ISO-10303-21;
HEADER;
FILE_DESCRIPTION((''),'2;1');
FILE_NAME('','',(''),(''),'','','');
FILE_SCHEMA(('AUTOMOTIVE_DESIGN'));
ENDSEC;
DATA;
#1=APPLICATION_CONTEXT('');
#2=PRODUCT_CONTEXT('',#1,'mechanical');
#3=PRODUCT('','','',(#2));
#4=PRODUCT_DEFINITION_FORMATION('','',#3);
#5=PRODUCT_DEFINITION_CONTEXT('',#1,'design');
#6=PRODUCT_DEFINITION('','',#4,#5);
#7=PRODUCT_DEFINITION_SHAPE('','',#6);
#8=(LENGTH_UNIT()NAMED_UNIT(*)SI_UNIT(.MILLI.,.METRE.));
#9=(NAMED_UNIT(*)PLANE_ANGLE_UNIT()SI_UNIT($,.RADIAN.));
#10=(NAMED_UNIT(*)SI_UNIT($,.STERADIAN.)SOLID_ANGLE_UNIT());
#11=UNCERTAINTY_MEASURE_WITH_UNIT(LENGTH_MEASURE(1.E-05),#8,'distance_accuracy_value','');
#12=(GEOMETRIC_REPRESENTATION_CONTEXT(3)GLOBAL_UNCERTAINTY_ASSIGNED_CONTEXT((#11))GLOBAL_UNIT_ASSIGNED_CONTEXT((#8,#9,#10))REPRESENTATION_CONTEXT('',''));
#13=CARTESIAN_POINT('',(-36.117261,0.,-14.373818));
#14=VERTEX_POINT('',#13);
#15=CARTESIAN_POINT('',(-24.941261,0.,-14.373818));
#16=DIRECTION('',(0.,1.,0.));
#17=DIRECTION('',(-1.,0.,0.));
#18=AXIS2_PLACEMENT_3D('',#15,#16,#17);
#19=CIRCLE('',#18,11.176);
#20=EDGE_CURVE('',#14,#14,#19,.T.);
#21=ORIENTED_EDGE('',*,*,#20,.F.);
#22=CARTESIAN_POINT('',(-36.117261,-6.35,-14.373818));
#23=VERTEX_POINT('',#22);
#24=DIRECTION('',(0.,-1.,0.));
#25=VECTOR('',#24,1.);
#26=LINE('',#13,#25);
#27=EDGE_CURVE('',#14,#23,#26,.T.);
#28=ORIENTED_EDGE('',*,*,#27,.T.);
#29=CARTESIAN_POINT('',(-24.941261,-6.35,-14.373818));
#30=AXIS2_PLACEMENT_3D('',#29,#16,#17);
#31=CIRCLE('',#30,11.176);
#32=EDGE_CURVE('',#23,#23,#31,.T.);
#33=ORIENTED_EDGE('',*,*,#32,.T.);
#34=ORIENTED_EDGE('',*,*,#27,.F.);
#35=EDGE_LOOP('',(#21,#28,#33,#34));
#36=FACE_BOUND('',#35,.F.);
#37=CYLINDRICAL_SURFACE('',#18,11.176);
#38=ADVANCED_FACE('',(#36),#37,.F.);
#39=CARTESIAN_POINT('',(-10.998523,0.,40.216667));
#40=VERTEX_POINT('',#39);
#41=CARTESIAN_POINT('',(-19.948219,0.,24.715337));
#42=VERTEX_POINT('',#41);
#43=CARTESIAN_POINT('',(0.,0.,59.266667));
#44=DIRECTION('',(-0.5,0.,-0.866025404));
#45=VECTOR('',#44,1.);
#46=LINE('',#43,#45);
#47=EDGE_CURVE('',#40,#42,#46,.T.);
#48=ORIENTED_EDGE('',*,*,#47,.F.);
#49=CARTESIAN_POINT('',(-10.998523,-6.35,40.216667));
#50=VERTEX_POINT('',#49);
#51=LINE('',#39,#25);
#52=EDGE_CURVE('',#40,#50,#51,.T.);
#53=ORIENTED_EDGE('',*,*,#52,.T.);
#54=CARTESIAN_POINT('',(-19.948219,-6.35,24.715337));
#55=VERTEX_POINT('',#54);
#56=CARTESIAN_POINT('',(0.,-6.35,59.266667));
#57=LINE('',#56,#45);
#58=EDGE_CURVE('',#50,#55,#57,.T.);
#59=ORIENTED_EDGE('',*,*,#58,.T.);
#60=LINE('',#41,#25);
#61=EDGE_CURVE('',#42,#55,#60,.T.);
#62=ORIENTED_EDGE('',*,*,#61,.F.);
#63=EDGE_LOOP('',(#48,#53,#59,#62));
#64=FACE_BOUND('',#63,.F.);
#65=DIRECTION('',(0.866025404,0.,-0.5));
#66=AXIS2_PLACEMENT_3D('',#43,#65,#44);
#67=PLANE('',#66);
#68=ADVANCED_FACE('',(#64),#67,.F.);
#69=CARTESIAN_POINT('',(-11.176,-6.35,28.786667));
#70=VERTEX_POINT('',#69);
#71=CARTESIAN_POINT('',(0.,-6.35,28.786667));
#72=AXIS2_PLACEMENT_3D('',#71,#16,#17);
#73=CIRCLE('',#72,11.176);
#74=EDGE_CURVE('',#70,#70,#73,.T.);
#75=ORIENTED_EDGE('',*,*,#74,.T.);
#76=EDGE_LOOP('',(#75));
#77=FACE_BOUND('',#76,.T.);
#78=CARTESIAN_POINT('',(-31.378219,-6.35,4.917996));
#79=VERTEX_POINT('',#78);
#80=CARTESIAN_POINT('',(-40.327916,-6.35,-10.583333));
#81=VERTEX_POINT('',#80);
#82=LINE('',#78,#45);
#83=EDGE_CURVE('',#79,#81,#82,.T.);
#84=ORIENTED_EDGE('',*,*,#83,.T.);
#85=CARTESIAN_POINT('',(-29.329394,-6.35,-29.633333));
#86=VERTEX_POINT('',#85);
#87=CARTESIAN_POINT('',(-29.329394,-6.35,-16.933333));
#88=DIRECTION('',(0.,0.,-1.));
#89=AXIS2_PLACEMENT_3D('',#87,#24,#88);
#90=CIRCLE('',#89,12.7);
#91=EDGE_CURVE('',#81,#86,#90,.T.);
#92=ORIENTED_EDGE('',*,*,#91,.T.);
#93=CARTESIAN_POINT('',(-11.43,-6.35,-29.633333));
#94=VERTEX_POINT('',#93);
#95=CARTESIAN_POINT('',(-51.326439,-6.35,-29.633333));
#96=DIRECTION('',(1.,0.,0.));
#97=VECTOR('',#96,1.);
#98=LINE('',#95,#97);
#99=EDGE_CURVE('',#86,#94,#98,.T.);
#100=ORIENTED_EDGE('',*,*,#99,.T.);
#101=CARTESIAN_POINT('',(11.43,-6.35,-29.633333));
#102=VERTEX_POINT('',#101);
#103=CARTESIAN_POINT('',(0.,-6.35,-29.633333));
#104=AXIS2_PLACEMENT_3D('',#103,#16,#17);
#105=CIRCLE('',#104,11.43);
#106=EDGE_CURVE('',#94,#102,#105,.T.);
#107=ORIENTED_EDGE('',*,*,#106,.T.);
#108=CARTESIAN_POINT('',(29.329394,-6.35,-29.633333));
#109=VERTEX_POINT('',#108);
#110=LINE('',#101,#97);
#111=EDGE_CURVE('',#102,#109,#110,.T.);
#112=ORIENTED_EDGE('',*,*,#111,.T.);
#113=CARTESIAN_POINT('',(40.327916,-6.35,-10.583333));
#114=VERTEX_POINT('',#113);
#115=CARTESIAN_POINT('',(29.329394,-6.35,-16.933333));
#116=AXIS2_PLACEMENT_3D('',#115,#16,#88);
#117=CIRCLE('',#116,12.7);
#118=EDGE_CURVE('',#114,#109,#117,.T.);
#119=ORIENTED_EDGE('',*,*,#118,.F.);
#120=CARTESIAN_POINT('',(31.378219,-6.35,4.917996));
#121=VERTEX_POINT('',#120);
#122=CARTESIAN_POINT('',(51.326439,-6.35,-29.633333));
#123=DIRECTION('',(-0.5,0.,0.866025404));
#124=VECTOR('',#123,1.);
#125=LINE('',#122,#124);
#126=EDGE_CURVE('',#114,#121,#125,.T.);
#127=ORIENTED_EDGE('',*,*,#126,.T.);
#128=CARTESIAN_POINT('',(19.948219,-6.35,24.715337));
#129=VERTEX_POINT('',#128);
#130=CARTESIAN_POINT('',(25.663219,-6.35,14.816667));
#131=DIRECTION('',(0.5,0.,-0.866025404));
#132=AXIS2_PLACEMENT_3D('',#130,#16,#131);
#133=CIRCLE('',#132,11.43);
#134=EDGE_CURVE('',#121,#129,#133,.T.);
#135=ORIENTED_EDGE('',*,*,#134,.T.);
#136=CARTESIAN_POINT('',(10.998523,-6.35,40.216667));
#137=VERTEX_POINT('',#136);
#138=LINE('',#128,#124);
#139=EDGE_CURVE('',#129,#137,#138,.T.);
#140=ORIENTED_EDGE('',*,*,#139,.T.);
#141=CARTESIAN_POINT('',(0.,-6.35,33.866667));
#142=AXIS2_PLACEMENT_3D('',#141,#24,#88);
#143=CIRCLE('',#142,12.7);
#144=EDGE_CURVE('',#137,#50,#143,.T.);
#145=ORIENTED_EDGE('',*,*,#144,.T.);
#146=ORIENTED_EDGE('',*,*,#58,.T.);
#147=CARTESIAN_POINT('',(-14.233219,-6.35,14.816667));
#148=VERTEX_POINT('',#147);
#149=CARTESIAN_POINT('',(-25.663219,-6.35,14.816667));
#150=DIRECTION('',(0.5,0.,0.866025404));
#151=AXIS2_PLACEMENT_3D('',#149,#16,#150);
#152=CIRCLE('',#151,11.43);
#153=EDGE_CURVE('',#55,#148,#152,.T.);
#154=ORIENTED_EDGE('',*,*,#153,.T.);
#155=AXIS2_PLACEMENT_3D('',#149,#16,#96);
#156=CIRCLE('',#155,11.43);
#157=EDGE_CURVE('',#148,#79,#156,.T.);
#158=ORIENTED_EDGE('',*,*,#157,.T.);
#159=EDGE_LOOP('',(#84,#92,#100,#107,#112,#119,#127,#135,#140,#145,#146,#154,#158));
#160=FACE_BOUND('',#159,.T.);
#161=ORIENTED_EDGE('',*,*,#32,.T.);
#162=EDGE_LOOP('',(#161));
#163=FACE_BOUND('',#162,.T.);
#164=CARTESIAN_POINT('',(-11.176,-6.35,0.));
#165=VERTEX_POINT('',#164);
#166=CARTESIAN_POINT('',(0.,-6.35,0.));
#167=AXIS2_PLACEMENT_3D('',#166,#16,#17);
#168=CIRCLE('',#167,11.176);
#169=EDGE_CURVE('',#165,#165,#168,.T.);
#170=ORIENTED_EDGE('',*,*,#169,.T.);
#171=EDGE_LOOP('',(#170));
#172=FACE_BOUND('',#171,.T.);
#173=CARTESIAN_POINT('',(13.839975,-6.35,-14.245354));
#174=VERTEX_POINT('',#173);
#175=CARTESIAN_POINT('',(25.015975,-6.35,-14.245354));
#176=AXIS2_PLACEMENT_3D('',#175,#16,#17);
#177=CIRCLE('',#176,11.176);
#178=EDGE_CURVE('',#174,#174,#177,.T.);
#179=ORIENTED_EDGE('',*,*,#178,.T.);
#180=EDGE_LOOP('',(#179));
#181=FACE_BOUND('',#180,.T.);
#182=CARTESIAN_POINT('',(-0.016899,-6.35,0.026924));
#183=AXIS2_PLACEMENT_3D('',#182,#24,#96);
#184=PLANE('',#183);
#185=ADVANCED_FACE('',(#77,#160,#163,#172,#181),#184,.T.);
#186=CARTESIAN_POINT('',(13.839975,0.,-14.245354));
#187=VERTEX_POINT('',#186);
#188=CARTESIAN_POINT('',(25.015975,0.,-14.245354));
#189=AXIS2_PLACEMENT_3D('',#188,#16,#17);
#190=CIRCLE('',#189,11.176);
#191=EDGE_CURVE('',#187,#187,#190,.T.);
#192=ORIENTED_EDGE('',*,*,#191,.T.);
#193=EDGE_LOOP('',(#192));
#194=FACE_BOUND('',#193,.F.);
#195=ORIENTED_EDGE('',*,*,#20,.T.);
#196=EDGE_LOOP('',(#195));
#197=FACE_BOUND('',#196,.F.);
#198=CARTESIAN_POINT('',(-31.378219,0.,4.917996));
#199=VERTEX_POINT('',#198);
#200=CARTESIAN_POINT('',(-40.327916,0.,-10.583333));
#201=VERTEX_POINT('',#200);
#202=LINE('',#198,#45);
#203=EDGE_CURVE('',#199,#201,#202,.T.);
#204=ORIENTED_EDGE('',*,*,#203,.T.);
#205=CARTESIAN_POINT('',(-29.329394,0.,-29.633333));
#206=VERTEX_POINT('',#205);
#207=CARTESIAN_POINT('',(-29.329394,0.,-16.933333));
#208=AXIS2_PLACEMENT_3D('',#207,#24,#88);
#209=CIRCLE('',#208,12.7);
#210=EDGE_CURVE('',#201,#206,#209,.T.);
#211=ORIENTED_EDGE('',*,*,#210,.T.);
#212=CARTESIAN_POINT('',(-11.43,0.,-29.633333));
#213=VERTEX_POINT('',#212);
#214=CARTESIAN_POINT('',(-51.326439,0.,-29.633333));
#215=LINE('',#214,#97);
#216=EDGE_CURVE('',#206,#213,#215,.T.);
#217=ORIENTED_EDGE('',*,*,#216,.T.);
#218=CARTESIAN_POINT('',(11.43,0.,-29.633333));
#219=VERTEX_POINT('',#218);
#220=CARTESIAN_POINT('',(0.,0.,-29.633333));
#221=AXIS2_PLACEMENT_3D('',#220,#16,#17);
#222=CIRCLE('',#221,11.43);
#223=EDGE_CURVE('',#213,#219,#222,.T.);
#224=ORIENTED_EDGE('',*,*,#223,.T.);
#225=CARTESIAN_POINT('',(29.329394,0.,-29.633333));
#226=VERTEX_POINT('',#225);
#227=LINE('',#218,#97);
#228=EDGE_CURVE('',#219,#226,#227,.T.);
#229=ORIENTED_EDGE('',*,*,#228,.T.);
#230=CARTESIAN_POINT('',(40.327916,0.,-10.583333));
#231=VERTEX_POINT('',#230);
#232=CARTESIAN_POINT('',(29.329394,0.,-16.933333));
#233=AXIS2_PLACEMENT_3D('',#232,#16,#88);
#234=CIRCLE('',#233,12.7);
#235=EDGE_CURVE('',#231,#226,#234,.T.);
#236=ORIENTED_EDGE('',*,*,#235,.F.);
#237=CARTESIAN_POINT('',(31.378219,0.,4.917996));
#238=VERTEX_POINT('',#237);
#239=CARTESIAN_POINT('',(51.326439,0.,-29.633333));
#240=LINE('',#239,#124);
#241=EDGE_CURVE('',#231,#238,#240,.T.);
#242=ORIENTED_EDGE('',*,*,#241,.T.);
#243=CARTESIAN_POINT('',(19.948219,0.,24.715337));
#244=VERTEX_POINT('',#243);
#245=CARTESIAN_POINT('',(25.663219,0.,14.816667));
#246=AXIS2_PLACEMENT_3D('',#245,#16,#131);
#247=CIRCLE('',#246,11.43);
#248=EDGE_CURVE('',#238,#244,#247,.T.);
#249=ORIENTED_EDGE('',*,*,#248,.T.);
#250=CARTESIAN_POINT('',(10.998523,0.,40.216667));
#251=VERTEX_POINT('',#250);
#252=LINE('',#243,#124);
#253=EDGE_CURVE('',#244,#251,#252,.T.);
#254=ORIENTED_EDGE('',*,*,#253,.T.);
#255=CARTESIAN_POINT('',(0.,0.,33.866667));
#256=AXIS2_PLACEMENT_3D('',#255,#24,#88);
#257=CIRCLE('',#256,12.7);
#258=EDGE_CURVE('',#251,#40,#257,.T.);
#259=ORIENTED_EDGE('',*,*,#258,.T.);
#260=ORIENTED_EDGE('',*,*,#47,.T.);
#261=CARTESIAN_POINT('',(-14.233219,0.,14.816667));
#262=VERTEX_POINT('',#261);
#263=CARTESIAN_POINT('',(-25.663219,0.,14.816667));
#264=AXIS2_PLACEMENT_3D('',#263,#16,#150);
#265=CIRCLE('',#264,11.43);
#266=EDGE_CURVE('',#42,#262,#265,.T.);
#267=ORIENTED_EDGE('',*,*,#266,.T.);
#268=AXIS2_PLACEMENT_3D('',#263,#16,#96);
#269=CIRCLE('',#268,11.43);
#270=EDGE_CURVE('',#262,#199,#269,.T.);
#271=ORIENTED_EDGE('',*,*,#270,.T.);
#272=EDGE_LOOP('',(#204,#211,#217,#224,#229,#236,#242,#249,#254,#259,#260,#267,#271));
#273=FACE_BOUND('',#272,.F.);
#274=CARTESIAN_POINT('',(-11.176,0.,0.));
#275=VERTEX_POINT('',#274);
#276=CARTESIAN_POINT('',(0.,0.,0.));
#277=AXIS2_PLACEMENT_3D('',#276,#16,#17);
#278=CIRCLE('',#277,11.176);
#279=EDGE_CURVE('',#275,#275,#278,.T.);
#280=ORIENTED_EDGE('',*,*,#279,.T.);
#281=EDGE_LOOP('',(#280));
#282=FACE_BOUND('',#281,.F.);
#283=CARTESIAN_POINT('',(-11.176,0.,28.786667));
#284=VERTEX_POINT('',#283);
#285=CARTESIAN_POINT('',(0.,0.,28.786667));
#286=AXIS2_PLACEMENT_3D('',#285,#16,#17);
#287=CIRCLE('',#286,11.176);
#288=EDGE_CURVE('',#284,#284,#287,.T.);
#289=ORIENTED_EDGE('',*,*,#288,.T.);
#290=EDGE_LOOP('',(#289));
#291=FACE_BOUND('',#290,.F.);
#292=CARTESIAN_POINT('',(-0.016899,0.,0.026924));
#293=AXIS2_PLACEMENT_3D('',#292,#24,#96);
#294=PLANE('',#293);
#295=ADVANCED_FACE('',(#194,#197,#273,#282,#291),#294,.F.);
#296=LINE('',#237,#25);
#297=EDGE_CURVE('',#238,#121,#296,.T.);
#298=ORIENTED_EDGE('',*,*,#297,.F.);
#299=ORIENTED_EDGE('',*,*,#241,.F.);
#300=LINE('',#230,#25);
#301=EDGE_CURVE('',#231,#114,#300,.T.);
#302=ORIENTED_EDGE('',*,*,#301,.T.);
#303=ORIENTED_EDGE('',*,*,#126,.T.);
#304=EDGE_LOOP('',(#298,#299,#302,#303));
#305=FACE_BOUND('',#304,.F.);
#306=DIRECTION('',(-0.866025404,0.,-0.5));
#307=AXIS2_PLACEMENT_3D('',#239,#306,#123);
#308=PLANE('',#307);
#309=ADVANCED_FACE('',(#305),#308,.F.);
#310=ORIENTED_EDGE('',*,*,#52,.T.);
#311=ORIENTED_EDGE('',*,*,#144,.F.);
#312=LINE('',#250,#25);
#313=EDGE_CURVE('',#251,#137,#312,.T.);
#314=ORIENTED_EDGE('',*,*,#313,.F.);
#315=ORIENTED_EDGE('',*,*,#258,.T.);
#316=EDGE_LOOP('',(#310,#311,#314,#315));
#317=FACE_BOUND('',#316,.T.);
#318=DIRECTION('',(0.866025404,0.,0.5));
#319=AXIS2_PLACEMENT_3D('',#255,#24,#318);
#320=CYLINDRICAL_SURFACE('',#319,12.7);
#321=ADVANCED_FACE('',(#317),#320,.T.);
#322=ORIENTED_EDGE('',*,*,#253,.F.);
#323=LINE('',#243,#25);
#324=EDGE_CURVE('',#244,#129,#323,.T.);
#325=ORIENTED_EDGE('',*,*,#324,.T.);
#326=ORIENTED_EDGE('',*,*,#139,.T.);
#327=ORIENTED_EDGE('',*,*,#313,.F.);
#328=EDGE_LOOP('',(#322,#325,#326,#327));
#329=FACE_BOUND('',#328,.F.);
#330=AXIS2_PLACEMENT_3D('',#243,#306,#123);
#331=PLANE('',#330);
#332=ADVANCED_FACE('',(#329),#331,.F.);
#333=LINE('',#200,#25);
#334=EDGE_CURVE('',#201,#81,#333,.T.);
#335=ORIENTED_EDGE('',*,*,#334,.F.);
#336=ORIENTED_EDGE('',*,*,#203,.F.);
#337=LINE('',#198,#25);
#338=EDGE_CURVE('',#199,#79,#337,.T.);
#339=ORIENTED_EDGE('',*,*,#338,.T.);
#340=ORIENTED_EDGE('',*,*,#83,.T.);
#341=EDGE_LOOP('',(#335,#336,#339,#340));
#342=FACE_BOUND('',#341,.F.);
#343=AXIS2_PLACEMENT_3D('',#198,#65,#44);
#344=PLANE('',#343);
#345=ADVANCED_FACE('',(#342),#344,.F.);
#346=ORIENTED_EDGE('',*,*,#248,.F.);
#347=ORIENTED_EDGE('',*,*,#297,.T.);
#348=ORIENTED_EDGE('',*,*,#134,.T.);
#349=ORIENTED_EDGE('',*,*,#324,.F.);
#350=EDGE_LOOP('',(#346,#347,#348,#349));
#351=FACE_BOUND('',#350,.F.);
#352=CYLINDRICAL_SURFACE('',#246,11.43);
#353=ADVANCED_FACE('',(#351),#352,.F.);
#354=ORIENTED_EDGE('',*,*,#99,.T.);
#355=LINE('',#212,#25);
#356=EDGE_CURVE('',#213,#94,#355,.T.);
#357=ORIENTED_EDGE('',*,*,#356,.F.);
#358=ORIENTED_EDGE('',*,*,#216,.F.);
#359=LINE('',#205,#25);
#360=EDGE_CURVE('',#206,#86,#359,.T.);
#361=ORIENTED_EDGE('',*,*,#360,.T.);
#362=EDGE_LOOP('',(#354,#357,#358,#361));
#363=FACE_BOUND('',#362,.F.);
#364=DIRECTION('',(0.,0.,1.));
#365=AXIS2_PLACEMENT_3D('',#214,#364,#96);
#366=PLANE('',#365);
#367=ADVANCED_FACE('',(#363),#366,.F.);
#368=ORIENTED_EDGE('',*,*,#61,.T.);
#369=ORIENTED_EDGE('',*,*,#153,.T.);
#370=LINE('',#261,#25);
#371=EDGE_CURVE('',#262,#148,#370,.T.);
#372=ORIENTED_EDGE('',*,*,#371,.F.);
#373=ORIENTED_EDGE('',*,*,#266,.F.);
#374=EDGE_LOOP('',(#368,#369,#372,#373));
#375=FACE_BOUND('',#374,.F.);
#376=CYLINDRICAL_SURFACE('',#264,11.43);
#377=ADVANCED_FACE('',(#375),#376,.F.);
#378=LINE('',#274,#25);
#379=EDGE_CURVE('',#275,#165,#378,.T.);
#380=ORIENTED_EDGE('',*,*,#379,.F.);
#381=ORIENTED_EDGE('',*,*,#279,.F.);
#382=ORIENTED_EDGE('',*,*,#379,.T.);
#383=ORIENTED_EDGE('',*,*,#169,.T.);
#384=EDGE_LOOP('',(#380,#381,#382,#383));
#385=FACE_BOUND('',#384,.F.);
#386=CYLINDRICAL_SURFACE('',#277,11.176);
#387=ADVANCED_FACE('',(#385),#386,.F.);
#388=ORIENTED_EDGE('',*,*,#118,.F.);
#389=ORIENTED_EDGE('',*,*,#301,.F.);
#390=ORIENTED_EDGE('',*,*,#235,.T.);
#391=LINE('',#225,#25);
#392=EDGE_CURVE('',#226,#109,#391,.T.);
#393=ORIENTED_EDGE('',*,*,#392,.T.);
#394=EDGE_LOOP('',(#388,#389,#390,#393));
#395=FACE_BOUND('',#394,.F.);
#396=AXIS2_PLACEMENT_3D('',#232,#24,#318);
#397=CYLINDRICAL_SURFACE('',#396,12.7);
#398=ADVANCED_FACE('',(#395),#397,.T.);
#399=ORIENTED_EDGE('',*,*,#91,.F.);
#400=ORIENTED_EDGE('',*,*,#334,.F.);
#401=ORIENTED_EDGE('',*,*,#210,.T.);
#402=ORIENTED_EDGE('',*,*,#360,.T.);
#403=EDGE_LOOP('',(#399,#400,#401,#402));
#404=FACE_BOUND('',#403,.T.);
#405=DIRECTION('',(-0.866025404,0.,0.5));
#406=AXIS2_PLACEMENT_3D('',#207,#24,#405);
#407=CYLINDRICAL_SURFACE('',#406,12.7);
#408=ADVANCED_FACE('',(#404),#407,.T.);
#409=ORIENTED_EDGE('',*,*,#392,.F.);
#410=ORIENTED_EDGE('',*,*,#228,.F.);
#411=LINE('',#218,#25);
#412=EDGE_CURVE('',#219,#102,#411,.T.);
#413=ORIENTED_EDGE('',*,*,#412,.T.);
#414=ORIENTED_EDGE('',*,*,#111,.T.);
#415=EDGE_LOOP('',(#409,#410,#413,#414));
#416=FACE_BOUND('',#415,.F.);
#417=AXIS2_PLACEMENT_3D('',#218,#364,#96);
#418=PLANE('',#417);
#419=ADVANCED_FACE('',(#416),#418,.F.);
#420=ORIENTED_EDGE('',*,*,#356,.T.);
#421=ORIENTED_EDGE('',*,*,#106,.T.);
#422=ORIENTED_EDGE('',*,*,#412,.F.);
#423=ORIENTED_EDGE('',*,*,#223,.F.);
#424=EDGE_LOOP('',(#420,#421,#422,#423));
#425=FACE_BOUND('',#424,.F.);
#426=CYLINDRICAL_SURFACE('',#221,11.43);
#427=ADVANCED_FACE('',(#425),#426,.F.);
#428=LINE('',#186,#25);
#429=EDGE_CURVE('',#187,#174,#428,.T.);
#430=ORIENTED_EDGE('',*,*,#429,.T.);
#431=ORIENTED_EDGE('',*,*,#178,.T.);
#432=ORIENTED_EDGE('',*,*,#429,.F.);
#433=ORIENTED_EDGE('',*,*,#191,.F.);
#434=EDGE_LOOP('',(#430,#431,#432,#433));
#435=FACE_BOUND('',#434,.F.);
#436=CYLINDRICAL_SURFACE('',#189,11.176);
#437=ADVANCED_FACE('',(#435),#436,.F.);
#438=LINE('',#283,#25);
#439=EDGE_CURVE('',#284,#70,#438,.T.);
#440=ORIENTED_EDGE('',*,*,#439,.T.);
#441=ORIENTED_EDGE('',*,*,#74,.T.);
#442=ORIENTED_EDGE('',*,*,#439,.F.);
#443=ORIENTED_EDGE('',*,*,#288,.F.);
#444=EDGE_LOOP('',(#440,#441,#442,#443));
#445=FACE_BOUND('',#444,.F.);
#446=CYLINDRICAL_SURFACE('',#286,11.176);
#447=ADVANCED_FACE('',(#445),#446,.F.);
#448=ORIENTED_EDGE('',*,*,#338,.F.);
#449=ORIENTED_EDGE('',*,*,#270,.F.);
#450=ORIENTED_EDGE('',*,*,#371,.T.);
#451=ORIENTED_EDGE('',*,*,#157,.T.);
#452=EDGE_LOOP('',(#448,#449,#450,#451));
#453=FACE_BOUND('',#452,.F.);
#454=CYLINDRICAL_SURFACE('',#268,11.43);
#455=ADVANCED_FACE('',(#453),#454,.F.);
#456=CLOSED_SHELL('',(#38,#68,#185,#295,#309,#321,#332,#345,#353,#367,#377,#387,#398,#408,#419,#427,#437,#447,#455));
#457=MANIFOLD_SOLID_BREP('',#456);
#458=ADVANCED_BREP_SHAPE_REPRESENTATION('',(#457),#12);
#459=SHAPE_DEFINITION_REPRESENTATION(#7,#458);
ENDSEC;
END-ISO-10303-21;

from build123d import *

# Parameters (mm, degrees)
F1_DEPTH = 6.35
F4_R     = 11.176
F5_DEPTH = 25.4
F6_R     = 12.7
F7_R     = 11.176
F8_DEPTH = 25.4


# Not quite as in the source:
# - a feature of the source that left no trace in its solid (it failed there, or was rolled back) is left out


with BuildPart() as f1:
    # F0 (on Front) → F1 (new body)
    with BuildSketch(Plane.XZ):
        with BuildLine():
            Line((19.9482194655, 24.7153370319), (0, 59.2666666667))
            Line((0, 59.2666666667), (-19.9482194655, 24.7153370319))
            ThreePointArc((-19.9482194655, 24.7153370319), (-15.7645491002, 20.5316666667), (-14.2332194655, 14.8166666667))
            ThreePointArc((-14.2332194655, 14.8166666667), (-19.9482194655, 4.9179963014), (-31.3782194655, 4.9179963014))
            Line((-31.3782194655, 4.9179963014), (-51.326438931, -29.6333333333))
            Line((-51.326438931, -29.6333333333), (-11.43, -29.6333333333))
            ThreePointArc((-11.43, -29.6333333333), (0, -18.2033333333), (11.43, -29.6333333333))
            Line((11.43, -29.6333333333), (51.326438931, -29.6333333333))
            Line((51.326438931, -29.6333333333), (31.3782194655, 4.9179963014))
            ThreePointArc((31.3782194655, 4.9179963014), (15.7645491002, 9.1016666667), (19.9482194655, 24.7153370319))
        make_face()
    extrude(amount=F1_DEPTH)

    # F4 (on face) → F5 (cut)
    with BuildSketch(Plane(origin=(0, 0, 0), x_dir=(-1, 0, 0), z_dir=(0, 1, 0))):
        with Locations((0, 28.7866666667)):
            Circle(F4_R)
        with Locations((-25.0159751206, -14.245354451)):
            Circle(F4_R)
        with Locations((24.9412614338, -14.3738179923)):
            Circle(F4_R)
    extrude(amount=-F5_DEPTH, mode=Mode.SUBTRACT)

    # F6
    f6_edges = [f1.edges().sort_by_distance(p)[0] for p in [
        (0, -3.175, 59.266667),
        (51.326439, -3.175, -29.633333),
        (-51.326439, -3.175, -29.633333),
    ]]
    fillet(f6_edges, radius=F6_R)

    # F7 (on face) → F8 (cut)
    with BuildSketch(Plane(origin=(0, 0, 0), x_dir=(-1, 0, 0), z_dir=(0, 1, 0))):
        Circle(F7_R)
    extrude(amount=-F8_DEPTH, mode=Mode.SUBTRACT)


solid = f1.part
